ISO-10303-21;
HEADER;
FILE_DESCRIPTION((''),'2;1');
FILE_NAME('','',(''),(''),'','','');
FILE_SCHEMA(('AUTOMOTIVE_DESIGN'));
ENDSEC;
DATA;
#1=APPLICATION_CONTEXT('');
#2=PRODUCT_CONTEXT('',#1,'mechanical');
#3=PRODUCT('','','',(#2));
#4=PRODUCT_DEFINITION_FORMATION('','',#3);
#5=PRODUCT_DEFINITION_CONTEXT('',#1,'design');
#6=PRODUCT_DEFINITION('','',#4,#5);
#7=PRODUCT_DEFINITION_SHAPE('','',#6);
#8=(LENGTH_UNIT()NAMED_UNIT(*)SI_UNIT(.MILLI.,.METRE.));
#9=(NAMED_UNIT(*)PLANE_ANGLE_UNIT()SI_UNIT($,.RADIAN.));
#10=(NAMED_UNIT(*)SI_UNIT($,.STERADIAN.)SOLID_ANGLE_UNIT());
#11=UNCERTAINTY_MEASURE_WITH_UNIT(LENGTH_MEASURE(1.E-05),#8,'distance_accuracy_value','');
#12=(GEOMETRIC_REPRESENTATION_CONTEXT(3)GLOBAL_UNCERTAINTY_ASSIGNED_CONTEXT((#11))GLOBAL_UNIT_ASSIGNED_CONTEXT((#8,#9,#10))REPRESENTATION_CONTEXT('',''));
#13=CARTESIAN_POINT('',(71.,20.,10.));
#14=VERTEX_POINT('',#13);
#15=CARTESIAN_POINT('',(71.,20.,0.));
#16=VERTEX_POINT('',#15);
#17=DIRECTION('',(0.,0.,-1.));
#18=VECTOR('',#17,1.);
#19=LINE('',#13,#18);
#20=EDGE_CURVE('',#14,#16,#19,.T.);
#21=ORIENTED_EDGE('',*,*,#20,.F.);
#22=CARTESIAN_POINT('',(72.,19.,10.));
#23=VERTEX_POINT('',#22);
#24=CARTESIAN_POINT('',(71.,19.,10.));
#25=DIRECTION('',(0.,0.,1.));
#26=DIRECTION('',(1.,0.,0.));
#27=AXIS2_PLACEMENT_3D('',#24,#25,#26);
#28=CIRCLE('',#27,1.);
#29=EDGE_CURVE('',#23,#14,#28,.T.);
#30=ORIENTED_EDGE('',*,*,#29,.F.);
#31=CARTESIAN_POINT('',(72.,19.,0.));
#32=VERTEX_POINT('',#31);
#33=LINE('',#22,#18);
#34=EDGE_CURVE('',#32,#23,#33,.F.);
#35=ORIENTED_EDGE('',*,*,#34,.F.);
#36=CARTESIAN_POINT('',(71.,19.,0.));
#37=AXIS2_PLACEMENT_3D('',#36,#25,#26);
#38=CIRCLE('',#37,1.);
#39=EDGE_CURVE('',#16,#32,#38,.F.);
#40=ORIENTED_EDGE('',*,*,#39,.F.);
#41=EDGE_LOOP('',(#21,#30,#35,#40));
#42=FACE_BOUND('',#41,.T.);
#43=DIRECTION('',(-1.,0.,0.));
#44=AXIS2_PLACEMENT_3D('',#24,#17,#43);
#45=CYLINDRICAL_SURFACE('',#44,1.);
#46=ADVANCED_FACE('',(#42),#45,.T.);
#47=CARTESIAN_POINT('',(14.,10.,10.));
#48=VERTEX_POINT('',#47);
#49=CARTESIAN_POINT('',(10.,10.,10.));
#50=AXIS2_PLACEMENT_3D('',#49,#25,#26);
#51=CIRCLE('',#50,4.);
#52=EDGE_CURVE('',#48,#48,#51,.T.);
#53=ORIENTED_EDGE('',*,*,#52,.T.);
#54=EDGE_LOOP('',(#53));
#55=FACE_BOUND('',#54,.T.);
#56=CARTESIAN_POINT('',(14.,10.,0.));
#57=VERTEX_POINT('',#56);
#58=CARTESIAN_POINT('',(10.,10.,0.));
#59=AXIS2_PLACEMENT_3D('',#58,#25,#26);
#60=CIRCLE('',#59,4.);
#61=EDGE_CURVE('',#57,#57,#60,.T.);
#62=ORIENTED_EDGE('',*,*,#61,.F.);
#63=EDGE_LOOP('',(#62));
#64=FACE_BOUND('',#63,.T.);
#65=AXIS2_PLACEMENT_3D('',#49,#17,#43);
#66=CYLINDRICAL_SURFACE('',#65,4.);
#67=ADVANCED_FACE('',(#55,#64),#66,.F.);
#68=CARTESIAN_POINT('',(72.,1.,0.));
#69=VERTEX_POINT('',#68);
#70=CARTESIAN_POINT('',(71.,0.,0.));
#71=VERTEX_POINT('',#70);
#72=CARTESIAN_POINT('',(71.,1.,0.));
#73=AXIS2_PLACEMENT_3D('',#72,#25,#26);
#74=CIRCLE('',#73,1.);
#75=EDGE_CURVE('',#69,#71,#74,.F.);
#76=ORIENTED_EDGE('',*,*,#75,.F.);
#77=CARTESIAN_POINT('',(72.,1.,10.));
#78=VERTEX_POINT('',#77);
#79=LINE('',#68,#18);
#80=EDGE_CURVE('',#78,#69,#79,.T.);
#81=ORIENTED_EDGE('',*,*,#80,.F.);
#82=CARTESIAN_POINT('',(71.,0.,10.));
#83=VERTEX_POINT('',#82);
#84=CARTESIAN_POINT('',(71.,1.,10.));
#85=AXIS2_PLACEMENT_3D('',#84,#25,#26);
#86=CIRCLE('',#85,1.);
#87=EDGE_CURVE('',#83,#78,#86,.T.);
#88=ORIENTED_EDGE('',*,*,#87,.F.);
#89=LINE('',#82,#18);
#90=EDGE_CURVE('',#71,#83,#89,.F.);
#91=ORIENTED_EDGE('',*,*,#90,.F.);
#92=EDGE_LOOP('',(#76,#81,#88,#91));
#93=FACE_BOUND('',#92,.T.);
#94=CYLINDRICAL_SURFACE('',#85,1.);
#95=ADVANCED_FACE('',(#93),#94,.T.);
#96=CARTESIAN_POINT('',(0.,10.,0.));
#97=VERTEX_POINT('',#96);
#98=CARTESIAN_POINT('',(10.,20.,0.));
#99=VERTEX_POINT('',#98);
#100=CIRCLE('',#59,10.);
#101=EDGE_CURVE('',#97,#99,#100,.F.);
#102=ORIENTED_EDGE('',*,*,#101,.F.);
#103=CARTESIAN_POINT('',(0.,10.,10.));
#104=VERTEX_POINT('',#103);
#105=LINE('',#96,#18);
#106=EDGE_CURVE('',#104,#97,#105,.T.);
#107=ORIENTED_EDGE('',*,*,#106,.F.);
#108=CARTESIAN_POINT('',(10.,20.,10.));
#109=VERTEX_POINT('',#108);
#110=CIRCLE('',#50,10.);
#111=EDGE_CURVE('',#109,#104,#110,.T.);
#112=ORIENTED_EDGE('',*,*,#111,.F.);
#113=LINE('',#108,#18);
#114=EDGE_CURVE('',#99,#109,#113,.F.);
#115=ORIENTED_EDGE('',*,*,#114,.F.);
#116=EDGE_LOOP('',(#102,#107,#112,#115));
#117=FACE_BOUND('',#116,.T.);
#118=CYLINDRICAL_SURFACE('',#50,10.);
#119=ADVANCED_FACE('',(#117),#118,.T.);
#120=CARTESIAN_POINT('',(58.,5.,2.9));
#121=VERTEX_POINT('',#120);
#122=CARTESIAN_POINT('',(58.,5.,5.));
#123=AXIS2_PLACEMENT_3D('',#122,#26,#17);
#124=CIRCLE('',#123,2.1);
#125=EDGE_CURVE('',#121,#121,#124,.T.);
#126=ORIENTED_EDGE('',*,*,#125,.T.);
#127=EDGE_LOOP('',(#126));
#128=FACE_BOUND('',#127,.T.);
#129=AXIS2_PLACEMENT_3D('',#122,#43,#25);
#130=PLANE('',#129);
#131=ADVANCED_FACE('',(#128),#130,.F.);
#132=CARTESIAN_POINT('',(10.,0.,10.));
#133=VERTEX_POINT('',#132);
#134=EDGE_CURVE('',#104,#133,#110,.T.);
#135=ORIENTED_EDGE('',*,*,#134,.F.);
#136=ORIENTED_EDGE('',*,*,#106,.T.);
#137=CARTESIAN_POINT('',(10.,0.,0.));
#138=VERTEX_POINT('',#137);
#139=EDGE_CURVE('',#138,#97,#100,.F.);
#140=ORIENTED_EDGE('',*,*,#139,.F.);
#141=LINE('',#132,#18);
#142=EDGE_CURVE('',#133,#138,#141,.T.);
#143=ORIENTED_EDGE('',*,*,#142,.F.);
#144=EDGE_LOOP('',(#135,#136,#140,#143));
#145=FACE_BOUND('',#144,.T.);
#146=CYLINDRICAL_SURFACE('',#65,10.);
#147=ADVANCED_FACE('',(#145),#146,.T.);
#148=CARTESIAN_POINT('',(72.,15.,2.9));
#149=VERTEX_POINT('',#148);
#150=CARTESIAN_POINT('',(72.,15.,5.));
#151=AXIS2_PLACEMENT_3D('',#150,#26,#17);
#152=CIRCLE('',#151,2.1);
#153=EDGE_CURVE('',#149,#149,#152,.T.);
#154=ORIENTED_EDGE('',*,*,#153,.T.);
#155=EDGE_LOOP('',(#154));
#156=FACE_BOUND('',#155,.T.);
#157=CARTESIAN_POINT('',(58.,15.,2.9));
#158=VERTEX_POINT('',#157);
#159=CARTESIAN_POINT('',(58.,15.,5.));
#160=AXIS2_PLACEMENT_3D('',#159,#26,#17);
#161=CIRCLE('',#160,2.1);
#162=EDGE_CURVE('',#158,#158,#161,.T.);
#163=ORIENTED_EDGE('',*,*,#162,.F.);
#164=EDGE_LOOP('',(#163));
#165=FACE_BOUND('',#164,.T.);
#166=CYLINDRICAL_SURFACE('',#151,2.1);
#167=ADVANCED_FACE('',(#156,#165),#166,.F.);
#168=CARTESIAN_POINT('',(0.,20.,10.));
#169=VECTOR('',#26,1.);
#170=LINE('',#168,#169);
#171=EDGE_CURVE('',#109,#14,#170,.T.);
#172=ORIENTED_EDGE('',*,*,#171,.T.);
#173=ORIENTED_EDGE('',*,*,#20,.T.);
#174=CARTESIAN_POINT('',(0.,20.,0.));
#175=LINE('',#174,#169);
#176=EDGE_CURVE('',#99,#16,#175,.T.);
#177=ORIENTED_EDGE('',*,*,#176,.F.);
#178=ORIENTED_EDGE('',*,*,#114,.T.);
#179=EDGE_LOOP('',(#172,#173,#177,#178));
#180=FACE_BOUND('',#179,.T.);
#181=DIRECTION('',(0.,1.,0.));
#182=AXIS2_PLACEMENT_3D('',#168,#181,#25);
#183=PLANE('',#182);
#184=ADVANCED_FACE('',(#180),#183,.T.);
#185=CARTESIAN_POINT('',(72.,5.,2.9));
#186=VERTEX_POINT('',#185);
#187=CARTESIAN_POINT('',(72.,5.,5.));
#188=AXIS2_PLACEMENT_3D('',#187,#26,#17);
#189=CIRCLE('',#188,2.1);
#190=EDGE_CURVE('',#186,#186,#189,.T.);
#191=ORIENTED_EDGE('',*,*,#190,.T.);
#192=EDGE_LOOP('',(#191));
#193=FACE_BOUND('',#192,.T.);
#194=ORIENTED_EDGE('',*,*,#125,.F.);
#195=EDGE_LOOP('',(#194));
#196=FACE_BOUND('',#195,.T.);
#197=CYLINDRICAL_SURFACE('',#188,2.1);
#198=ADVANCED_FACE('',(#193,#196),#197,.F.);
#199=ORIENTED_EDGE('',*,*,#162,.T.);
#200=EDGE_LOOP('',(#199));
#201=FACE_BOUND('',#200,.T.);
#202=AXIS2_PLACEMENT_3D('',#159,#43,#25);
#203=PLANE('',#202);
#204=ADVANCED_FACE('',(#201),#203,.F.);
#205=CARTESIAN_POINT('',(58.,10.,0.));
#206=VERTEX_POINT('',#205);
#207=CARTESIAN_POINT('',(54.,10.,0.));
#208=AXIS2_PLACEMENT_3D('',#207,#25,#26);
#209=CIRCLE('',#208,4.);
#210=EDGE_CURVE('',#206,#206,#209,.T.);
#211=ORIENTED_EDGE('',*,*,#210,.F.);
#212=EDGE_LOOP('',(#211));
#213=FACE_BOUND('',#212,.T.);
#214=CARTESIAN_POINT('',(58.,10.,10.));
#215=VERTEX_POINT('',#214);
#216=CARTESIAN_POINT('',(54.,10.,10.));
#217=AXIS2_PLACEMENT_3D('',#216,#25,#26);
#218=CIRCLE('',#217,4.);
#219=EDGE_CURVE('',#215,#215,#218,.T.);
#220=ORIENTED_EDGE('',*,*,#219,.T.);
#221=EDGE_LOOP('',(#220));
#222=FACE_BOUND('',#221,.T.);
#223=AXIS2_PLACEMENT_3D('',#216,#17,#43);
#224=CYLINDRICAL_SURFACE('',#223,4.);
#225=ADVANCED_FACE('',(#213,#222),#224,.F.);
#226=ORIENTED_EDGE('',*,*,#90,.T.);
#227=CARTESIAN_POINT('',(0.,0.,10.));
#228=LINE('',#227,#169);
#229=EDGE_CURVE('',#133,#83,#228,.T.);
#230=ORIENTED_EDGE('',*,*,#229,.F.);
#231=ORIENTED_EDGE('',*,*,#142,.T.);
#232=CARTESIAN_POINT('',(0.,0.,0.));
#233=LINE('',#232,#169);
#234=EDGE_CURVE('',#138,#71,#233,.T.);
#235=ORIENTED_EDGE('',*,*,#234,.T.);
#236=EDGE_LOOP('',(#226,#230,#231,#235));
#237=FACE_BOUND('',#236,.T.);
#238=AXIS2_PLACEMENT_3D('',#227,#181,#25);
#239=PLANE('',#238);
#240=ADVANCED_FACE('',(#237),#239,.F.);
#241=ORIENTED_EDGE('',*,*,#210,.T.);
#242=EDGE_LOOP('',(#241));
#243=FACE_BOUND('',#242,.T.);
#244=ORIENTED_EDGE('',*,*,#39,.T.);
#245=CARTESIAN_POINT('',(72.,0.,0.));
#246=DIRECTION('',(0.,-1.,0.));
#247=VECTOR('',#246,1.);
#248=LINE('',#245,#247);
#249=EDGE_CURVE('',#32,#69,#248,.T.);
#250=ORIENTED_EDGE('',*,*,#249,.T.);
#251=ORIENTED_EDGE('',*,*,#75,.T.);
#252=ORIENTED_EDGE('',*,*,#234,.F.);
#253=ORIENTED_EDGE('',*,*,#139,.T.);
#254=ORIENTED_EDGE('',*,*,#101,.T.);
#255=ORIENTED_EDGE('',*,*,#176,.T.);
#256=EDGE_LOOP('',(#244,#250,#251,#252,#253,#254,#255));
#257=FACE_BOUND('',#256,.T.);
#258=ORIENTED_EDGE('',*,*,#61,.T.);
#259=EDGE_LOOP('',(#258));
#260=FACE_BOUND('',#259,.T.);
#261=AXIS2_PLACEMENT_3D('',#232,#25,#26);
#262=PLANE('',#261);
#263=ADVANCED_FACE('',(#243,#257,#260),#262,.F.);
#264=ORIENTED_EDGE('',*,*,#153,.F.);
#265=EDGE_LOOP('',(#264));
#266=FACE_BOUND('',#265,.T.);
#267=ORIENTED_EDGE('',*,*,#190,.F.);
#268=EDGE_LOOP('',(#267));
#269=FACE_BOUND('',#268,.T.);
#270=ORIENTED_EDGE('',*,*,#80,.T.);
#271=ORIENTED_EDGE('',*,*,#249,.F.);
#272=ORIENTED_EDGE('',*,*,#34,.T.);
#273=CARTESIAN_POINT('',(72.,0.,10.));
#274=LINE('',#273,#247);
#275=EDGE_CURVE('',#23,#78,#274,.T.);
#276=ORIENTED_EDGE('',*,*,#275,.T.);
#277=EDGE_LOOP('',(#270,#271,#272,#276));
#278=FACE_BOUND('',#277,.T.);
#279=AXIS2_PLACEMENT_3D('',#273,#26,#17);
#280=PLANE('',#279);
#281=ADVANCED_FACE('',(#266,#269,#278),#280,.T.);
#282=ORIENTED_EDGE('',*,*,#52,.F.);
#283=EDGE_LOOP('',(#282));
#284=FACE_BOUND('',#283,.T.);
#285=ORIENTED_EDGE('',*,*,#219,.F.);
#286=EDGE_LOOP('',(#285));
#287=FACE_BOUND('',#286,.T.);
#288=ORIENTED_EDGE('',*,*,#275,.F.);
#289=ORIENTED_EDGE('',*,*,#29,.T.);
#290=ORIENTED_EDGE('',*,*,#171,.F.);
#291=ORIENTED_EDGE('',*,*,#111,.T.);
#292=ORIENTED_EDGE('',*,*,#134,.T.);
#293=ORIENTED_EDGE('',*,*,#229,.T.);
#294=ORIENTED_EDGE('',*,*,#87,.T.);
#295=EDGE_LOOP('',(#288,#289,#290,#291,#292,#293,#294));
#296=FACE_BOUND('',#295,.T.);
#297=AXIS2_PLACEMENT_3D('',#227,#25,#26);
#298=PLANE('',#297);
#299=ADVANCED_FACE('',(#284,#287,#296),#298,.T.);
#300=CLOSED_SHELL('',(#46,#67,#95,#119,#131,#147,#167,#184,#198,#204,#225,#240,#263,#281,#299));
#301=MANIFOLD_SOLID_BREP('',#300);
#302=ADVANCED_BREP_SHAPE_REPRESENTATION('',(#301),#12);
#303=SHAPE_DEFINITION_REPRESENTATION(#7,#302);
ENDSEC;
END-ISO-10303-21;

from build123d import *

# Parameters (mm, degrees)
ESQUISSE1_W               = 72
ESQUISSE1_H               = 20
ESQUISSE1_R               = 4
BOSS_EXTRU_1_DEPTH        = 10
CONG_1_R                  = 10
TROU_TARAUD_M5X0_82_D     = 4.2
TROU_TARAUD_M5X0_82_DEPTH = 14
CONG_2_R                  = 1


with BuildPart() as part:
    # Esquisse1 → Boss.-Extru.1 (new body)
    with BuildSketch(Plane.XY):
        with Locations((36, 10)):
            Rectangle(ESQUISSE1_W, ESQUISSE1_H)
        with Locations((10, 10)):
            Circle(ESQUISSE1_R, mode=Mode.SUBTRACT)
        with Locations((54, 10)):
            Circle(ESQUISSE1_R, mode=Mode.SUBTRACT)
    extrude(amount=BOSS_EXTRU_1_DEPTH)

    # Congé1
    cong_1_edges = [part.edges().sort_by_distance(p)[0] for p in [
        (0, 0, 5),
        (0, 20, 5),
    ]]
    fillet(cong_1_edges, radius=CONG_1_R - 0.0001)  # a hair under: the kernel refuses the full size

    # Trou taraudé M5x0.82
    with Locations(Plane(origin=(72, 0, 0), x_dir=(0, 0, -1), z_dir=(1, 0, 0))):
        with Locations((-5, 15), (-5, 5)):
            Hole(TROU_TARAUD_M5X0_82_D / 2, depth=TROU_TARAUD_M5X0_82_DEPTH)

    # Congé2
    cong_2_edges = [part.edges().sort_by_distance(p)[0] for p in [
        (72, 0, 5),
        (72, 20, 5),
    ]]
    fillet(cong_2_edges, radius=CONG_2_R)


solid = part.part
